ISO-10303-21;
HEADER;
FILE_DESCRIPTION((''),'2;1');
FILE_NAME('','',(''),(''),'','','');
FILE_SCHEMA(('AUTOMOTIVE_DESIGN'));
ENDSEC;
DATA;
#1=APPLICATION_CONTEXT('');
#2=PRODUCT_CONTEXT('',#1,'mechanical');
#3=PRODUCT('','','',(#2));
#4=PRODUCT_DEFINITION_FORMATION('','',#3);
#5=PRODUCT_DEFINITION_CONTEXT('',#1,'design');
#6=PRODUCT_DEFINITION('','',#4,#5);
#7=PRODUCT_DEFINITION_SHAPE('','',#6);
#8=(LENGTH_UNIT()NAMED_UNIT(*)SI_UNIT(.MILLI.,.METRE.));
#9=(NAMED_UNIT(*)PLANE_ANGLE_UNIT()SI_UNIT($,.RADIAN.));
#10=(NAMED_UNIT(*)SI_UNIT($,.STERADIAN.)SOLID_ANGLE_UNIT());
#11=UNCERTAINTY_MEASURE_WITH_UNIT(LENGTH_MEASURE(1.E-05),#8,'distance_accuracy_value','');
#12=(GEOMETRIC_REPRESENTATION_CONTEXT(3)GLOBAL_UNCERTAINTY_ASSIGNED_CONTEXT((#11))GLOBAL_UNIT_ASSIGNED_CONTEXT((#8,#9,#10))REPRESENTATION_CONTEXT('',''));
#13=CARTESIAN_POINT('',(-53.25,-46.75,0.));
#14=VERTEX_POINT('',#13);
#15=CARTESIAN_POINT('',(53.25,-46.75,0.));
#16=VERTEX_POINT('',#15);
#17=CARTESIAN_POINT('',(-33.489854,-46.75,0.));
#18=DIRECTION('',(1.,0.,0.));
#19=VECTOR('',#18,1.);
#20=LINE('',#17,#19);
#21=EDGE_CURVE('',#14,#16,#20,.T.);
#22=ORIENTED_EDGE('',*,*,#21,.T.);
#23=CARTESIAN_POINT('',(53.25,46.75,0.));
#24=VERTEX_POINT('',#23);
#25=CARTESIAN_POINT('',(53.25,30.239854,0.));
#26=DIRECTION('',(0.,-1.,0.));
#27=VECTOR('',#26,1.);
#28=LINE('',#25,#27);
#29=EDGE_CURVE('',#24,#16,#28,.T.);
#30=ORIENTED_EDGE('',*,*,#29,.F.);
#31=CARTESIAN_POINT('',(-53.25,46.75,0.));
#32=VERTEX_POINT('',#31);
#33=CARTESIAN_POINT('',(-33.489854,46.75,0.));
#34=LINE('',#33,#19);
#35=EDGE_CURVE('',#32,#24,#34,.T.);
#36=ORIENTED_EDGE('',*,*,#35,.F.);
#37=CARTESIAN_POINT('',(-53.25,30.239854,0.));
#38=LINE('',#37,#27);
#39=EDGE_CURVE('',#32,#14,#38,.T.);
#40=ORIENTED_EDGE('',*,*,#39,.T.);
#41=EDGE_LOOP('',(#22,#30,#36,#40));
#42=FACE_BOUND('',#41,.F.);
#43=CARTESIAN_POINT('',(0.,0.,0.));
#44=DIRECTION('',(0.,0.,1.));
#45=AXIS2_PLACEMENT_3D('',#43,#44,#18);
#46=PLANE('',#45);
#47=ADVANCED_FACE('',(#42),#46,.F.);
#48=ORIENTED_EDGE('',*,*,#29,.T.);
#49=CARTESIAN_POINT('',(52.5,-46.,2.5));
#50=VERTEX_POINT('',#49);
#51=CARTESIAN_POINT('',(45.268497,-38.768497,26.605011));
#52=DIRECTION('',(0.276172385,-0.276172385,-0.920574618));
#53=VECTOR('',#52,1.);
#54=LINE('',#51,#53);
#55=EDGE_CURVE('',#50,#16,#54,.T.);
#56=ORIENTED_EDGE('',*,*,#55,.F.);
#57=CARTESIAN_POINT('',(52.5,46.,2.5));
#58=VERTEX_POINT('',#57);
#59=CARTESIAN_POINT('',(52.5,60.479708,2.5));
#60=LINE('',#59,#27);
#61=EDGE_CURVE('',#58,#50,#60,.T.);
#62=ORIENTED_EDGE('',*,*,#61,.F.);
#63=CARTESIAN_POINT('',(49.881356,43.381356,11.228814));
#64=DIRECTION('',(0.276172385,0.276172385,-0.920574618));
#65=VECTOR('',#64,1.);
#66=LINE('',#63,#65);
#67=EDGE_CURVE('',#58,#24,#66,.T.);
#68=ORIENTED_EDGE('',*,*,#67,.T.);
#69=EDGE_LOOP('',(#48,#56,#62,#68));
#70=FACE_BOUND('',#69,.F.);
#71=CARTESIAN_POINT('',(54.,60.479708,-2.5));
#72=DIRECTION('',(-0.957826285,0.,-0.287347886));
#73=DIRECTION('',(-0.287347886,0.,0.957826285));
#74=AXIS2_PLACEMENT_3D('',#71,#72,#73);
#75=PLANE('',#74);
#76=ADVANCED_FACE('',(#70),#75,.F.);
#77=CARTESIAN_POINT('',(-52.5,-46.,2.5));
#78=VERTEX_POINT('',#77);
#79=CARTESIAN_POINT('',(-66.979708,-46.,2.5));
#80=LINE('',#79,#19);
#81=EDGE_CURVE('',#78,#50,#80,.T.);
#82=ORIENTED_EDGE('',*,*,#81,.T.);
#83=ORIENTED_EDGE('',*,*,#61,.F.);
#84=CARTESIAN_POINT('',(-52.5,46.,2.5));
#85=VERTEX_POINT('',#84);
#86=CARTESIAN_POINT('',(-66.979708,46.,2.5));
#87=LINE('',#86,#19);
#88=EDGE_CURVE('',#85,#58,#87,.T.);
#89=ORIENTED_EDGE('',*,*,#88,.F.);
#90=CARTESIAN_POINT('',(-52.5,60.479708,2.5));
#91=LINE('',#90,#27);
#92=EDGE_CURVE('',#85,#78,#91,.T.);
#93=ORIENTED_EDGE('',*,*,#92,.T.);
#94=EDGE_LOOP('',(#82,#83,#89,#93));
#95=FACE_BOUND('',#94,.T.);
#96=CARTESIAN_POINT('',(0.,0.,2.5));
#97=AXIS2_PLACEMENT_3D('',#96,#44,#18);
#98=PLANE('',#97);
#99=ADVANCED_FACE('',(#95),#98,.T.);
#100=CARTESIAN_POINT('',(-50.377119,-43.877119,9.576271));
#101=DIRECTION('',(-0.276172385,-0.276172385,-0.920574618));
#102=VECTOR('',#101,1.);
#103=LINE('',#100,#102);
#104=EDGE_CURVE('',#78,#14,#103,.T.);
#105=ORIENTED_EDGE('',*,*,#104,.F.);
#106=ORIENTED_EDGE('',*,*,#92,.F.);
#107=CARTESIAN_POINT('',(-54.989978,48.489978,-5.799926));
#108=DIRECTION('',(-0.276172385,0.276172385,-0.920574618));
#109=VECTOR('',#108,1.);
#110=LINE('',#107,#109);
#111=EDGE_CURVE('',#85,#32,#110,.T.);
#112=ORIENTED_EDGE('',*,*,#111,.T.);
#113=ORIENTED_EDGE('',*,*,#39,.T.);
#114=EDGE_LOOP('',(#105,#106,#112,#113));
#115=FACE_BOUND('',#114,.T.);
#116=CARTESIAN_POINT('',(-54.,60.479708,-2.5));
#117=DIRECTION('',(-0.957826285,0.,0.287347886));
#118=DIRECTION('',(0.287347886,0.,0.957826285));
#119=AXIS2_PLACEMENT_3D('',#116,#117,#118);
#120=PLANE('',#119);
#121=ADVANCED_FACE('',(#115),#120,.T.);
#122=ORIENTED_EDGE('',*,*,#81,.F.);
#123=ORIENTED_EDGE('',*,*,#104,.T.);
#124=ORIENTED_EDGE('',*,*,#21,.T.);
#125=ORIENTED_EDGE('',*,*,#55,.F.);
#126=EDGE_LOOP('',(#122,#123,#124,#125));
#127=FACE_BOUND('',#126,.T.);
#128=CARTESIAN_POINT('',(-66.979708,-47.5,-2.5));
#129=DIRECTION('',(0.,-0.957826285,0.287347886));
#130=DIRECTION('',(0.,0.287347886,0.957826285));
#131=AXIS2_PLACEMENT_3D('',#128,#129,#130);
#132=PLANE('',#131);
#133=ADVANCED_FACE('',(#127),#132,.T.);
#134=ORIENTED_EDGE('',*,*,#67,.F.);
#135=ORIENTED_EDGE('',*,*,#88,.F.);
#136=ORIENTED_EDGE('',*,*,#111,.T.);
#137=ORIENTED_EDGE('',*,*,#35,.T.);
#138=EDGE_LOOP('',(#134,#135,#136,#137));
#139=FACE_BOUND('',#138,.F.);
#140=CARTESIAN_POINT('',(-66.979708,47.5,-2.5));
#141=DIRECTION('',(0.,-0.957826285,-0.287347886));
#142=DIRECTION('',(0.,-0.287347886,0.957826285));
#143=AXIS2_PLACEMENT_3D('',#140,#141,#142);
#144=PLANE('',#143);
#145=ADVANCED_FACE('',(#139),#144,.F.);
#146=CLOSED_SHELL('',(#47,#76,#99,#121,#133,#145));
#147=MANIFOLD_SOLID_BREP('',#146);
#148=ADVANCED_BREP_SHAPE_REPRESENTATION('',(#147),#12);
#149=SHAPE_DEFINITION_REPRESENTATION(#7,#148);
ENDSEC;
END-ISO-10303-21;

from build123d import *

# Parameters (mm, degrees)
F0_W        = 108
F0_H        = 95
F1_DEPTH    = 2.5
F2_T1_DEPTH = 133.959416678
F2_T3_DEPTH = 120.959416678


# Not quite as in the source:
# - a fillet or chamfer that OpenCascade refuses, or shapes differently, is made with other operations: its cross-section is extruded or revolved along the edge and cut away or added


with BuildPart() as f1:
    # F0 (on Top) → F1 (new body)
    with BuildSketch(Plane.XY):
        Rectangle(F0_W, F0_H)
    extrude(amount=F1_DEPTH)

    # F2: chamfer of 5 x 1.5 on 4 edges, made by hand

    # F2_s2 → F2_t1 (cut)
    with BuildSketch(Plane.YZ.offset(-66.979708339)):
        Polygon((-47.5, -2.5), (-46, 2.5), (-47.5, 2.5), align=None)
        Polygon((47.5, -2.5), (46, 2.5), (47.5, 2.5), align=None)
    extrude(amount=F2_T1_DEPTH, mode=Mode.SUBTRACT)

    # F2_s4 → F2_t3 (cut)
    with BuildSketch(Plane.XZ.offset(-60.479708339)):
        Polygon((-54, -2.5), (-52.5, 2.5), (-54, 2.5), align=None)
        Polygon((54, -2.5), (52.5, 2.5), (54, 2.5), align=None)
    extrude(amount=F2_T3_DEPTH, mode=Mode.SUBTRACT)


solid = f1.part
